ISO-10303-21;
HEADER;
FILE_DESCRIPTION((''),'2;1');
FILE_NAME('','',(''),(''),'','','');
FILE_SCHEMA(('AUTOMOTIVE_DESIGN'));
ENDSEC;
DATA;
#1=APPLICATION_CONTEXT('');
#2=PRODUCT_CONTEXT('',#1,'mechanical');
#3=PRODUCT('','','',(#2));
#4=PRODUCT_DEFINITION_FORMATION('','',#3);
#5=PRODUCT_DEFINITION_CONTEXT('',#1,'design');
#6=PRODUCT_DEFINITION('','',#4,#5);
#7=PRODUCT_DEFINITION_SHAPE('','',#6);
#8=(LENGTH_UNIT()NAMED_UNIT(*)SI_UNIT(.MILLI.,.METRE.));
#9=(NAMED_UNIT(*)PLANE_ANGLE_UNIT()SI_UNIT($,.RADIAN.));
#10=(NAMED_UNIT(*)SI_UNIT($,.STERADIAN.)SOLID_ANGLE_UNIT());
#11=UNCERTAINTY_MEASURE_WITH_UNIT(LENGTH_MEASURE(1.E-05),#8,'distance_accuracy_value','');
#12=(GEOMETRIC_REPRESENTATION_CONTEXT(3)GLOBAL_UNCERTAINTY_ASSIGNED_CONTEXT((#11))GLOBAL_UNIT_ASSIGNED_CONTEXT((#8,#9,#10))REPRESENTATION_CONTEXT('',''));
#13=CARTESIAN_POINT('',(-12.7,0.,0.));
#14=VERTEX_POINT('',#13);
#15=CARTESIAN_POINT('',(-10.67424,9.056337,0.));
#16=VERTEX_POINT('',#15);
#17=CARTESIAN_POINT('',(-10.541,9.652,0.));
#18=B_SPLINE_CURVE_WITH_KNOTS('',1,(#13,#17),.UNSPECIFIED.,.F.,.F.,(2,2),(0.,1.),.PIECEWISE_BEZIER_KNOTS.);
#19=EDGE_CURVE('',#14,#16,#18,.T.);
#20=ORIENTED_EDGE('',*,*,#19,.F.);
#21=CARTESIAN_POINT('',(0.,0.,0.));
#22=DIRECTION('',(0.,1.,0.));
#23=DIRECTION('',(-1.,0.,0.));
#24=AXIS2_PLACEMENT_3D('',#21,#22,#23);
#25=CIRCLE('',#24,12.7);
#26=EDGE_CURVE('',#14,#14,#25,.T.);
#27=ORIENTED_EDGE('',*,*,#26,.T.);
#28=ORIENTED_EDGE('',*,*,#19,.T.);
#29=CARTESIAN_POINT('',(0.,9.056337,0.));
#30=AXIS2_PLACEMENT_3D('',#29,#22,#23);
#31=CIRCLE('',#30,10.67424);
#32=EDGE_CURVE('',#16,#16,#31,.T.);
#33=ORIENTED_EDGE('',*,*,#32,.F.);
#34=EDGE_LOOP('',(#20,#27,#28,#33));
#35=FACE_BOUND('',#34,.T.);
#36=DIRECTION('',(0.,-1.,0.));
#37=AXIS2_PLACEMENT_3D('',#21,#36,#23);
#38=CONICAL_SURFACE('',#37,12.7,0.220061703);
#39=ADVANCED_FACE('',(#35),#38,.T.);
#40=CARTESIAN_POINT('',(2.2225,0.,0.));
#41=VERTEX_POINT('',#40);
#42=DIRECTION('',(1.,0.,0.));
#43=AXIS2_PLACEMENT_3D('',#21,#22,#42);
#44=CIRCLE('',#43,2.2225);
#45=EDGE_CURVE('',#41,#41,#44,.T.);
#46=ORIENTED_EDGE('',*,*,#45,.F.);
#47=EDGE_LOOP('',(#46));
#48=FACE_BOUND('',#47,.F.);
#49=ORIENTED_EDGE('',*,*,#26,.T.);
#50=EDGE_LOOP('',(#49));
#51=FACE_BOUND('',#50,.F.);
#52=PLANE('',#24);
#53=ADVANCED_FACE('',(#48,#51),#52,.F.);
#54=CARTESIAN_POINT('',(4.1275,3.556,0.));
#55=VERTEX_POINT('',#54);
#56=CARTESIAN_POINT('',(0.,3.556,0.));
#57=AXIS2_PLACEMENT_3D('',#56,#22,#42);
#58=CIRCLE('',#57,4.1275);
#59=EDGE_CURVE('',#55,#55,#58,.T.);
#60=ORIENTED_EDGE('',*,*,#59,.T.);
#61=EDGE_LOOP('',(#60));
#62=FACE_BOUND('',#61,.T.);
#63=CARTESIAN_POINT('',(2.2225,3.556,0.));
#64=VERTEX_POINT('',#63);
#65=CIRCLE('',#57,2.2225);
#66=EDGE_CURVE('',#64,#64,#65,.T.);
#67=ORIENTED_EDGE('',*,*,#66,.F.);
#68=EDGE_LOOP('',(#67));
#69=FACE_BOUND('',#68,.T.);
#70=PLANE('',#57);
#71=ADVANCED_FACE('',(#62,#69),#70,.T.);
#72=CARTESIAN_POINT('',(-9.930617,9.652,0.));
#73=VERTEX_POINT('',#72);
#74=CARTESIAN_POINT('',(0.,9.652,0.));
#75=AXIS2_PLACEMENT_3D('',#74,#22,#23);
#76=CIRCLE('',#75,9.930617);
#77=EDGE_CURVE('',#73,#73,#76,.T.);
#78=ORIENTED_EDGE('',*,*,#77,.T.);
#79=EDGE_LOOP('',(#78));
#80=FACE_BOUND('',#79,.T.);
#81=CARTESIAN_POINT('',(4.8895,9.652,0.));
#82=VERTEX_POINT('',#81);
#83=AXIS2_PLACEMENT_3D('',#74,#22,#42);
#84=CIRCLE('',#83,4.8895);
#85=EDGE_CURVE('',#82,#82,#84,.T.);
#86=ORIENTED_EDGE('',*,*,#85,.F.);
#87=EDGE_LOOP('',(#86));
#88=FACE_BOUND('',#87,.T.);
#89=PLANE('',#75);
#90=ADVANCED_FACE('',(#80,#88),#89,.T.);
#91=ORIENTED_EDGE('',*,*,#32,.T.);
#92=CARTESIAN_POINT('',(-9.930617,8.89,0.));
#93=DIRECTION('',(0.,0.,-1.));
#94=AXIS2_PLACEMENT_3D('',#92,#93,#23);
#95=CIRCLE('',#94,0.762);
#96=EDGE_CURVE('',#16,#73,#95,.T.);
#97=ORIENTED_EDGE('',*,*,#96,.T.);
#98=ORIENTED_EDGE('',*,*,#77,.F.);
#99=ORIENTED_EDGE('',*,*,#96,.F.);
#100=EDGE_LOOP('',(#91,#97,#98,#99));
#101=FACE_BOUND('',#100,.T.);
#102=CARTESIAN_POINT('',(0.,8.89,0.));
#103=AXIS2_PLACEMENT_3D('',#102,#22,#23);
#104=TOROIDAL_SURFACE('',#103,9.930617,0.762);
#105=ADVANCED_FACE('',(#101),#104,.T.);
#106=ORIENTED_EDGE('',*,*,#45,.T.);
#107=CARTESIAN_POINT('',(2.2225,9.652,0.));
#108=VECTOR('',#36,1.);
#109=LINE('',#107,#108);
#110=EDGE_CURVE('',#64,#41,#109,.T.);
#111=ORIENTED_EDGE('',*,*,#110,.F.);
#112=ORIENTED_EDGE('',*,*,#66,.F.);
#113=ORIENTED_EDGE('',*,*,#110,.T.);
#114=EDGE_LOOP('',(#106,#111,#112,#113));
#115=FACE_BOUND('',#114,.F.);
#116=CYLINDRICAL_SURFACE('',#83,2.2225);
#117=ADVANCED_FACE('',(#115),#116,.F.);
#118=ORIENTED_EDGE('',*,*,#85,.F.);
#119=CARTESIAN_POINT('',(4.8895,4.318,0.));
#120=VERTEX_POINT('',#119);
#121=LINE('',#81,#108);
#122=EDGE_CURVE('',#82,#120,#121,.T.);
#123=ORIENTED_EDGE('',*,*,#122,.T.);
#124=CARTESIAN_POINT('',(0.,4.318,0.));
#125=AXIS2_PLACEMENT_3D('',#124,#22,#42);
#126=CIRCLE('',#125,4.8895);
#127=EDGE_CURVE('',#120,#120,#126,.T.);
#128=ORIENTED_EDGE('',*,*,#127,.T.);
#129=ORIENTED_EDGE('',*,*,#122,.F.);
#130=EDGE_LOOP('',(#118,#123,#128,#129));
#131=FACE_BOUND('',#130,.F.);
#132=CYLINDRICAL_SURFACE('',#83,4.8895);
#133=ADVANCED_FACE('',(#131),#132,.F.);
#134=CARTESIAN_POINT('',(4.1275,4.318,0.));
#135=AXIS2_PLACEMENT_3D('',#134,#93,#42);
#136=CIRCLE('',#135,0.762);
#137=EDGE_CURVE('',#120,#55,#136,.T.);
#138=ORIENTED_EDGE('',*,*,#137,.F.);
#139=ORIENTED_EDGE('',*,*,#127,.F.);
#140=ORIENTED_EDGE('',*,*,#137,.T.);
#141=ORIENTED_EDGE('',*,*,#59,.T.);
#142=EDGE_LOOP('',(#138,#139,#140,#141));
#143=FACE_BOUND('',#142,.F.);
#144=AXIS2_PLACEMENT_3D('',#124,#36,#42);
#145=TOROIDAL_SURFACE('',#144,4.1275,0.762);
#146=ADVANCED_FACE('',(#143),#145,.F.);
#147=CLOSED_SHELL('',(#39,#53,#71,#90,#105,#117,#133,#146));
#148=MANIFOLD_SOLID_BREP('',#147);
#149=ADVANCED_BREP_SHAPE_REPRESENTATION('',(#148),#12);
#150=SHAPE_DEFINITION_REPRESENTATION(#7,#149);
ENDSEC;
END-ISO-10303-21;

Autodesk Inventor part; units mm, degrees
ref_plane "YZ Plane" through (0, 0, 0) normal (1, 0, 0) x (0, 1, 0)
ref_plane "XY Plane" through (0, 0, 0) normal (0, 0, 1) x (1, 0, 0)
sketch "Sketch1" plane through (0, 0, 0) normal (0, 1, 0) x (-1, 0, 0)
  circle A0 centre (0, 0) radius 12.7
  circle A1 centre (0, 0) radius 2.2225
  dimension "d0" = 25.4
  dimension "d1" = 4.445
ref_plane "Work Plane1" through (0, 9.652, 0) normal (0, 1, 0) x (-1, 0, 0)
sketch "Sketch2" plane through (0, 9.652, 0) normal (0, 1, 0) x (-1, 0, 0)
  circle A0 centre (0, 0) radius 2.2238
  circle A1 centre (0, 0) radius 10.541
  dimension "d3" = 21.082
loft "Loft1" add profiles "Sketch1", "Sketch2" contours A0 | A1 / A0 | A1
sketch "Sketch3" plane through (0, 9.652, 0) normal (0, 1, 0) x (1, 0, 0)
  circle A0 centre (0, 0) radius 2.2225
  dimension "d8" = 4.445
extrude "Extrusion1" cut sketch "Sketch3" against normal blind 25.4
sketch "Sketch4" plane through (0, 9.652, 0) normal (0, 1, 0) x (1, 0, 0)
  circle A0 centre (0, 0) radius 4.8895
  dimension "d11" = 9.779
extrude "Extrusion2" cut sketch "Sketch4" against normal blind 6.096
fillet "Fillet1" radius 0.762 2 edges at (10.541, 9.652, 0) (-4.8895, 3.556, 0)
properties part number "Soft Feet" material "Polystyrene, High Impact"
